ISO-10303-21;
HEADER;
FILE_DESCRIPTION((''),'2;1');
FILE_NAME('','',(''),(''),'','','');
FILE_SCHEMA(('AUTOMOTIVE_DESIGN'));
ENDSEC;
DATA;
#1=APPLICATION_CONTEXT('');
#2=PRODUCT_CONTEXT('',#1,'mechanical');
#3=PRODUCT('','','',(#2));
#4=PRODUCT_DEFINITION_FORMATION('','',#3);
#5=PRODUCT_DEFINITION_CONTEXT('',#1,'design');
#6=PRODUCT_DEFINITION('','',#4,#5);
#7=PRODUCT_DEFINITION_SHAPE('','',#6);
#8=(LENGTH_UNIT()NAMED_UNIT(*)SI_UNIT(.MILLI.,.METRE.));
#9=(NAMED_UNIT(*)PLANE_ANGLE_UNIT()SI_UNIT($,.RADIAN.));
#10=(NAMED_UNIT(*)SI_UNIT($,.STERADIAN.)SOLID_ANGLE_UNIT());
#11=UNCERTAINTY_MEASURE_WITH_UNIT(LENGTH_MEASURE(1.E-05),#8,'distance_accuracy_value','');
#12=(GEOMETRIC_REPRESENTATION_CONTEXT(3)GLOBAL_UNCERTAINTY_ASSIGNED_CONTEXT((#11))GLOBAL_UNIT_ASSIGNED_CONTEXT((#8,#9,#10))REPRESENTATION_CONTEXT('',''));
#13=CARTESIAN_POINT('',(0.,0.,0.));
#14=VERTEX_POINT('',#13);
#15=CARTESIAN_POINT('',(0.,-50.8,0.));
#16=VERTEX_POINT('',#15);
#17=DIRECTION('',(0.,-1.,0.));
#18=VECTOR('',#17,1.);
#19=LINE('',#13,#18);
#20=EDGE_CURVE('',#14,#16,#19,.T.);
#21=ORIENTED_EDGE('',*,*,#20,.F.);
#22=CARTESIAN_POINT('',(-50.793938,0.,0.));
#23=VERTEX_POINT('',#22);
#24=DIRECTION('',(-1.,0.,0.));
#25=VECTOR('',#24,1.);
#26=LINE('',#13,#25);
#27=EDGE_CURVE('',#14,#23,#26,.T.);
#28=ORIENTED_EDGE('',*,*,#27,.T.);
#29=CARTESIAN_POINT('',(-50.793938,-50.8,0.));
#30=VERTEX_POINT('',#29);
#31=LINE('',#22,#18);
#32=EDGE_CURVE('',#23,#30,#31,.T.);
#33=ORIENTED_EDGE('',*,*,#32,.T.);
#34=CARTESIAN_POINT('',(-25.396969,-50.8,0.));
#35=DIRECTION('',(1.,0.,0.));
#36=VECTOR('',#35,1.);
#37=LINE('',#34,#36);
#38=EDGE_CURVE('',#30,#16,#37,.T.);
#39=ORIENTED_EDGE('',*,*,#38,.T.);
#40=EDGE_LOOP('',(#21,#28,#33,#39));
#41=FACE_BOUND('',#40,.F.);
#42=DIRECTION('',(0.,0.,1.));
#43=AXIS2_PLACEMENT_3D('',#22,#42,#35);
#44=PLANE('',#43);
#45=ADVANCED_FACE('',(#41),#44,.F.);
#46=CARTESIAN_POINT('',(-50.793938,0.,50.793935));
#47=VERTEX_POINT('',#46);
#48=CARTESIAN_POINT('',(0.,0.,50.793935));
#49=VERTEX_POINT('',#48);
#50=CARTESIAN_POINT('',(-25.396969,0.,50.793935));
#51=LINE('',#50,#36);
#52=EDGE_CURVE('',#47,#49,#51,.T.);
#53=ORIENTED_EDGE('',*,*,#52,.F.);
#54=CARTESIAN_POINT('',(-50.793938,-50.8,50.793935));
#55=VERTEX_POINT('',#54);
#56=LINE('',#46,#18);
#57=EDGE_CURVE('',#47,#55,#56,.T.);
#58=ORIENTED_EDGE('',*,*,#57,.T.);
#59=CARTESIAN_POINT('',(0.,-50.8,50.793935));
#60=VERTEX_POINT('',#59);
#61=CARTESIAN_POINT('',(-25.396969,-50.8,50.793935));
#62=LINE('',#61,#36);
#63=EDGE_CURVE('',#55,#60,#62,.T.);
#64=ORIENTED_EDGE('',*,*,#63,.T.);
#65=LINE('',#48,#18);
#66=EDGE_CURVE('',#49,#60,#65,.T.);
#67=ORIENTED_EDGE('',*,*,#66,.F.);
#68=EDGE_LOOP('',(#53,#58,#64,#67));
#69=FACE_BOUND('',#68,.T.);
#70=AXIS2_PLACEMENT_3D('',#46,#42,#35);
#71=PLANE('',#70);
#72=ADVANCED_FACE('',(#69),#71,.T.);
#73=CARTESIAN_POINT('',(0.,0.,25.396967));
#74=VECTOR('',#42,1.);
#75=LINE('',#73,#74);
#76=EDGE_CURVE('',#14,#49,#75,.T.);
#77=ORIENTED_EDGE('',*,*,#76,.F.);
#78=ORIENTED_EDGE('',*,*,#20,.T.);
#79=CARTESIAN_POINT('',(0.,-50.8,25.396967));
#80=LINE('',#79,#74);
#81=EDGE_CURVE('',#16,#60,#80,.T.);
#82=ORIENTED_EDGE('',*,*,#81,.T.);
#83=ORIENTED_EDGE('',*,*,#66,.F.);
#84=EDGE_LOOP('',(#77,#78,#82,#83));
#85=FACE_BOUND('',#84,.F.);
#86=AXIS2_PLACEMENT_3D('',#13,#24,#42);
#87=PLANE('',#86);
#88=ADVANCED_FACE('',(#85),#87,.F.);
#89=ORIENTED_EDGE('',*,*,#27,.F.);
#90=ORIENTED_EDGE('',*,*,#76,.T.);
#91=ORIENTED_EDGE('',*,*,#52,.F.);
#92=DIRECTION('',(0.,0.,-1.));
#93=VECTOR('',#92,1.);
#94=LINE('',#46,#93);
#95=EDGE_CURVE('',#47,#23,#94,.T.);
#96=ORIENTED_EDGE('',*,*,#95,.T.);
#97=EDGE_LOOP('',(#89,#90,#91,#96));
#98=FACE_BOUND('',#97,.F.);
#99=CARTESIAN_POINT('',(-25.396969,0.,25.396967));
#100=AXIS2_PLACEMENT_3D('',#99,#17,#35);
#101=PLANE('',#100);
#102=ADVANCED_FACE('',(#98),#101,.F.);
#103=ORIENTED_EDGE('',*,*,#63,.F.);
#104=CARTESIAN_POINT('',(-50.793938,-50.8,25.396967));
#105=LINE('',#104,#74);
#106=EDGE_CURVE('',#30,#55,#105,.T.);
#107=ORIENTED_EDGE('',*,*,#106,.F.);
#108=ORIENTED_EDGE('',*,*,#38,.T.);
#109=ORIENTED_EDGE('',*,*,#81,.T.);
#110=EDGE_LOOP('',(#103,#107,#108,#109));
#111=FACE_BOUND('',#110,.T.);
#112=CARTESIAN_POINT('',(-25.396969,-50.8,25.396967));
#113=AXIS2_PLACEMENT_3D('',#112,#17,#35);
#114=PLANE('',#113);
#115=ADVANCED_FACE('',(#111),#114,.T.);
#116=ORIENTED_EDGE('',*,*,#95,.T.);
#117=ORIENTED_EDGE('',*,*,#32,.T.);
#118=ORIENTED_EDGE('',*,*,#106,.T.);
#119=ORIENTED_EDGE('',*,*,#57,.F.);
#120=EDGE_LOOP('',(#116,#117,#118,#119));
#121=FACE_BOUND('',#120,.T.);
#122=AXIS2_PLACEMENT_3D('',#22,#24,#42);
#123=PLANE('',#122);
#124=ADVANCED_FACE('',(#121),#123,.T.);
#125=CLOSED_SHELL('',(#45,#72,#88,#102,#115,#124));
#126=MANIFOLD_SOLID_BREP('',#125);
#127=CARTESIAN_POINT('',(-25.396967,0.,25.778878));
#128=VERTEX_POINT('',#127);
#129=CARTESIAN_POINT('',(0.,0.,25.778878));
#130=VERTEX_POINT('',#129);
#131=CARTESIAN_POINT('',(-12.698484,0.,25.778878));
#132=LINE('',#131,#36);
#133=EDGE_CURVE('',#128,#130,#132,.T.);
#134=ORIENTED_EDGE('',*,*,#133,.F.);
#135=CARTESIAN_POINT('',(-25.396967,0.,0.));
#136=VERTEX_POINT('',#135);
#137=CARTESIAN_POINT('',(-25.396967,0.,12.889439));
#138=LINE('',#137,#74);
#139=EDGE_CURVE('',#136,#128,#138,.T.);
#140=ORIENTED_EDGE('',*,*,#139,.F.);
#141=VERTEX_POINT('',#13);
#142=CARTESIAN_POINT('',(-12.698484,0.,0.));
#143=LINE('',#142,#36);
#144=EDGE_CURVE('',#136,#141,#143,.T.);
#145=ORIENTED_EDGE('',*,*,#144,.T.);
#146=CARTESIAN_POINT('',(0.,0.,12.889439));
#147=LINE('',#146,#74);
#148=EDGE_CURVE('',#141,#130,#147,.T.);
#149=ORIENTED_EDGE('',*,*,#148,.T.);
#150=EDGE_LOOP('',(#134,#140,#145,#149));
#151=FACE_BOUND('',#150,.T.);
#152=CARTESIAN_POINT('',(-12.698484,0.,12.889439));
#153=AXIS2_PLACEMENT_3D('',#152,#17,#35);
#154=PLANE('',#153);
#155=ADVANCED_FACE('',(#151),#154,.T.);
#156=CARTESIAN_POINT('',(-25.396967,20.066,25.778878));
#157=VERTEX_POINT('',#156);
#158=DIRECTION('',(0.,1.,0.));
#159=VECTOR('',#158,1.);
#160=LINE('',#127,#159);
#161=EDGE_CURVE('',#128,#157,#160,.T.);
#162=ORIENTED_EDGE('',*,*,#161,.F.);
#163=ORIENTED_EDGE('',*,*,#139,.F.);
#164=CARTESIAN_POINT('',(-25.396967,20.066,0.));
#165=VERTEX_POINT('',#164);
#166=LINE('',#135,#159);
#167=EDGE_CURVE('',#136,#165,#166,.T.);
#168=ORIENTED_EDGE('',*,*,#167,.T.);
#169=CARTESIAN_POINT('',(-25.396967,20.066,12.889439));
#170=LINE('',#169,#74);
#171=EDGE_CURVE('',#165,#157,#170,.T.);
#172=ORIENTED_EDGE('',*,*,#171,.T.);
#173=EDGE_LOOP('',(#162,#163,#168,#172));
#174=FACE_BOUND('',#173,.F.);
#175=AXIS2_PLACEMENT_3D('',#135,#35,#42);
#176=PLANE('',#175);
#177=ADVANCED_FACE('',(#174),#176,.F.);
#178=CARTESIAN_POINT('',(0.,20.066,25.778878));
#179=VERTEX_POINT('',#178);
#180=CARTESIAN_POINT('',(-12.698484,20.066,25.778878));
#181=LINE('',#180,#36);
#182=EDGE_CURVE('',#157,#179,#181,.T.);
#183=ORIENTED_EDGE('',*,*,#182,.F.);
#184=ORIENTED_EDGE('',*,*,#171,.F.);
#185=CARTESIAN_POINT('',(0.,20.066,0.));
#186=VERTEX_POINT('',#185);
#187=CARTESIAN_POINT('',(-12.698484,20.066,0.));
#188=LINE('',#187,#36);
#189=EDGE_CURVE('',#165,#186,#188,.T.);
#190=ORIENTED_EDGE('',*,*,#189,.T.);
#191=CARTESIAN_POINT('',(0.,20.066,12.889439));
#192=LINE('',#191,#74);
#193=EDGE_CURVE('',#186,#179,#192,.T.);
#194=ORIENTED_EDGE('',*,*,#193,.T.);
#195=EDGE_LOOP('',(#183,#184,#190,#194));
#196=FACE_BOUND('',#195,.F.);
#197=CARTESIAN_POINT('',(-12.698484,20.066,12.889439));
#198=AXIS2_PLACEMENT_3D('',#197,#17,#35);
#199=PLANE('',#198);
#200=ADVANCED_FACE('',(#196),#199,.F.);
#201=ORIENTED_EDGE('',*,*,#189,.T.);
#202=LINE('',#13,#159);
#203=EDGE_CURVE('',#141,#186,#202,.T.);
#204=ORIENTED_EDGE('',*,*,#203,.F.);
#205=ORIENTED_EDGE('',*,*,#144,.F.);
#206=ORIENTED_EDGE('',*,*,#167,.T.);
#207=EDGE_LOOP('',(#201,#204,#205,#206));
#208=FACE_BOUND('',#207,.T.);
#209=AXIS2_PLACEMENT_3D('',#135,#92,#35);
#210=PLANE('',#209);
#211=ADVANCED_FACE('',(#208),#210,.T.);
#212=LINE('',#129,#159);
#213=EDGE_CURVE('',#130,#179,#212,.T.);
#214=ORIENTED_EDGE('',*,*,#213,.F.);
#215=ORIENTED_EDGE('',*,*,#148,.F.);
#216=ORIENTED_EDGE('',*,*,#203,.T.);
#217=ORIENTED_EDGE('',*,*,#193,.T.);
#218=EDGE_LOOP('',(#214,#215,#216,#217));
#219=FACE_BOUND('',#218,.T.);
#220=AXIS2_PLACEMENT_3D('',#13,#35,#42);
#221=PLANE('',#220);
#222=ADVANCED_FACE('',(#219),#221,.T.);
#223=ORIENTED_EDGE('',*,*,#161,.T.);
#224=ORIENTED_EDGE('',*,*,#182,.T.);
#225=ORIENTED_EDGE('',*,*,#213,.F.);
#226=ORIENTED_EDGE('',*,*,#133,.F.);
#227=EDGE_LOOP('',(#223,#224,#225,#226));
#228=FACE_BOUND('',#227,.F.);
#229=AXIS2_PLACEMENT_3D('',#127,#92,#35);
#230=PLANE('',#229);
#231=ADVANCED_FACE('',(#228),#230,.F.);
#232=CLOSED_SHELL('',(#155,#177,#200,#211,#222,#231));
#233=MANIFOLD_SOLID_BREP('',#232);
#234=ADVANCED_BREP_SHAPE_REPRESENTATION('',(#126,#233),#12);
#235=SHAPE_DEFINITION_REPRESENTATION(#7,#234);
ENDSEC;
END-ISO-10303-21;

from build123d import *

# Parameters (mm, degrees)
F0_W     = 50.7939383388
F0_H     = 50.7939346135
F1_DEPTH = 50.8
F2_W     = 25.3969691694
F2_H     = 25.3969673067
F3_DEPTH = 25.4
F6_W     = 25.3969673067
F6_H     = 25.7788784802
F7_DEPTH = 20.066


# Not quite as in the source:
# - the program builds the solid bodies; features that only make, move or delete a surface that nothing else refers to are left out


with BuildPart() as f1:
    # F0 (on Front) → F1 (new body)
    with BuildSketch(Plane.XZ):
        with Locations((-25.3969691694, 25.3969673067)):
            Rectangle(F0_W, F0_H)
    extrude(amount=F1_DEPTH)

    # F2 (on Front) → F3 (join)
    with BuildSketch(Plane.XZ):
        with Locations((-38.0954537541, 12.6984836534)):
            Rectangle(F2_W, F2_H)
    extrude(amount=F3_DEPTH)


with BuildPart() as f7:
    # F6 (on Front) → F7 (new body)
    with BuildSketch(Plane.XZ):
        with Locations((-12.6984836534, 12.8894392401)):
            Rectangle(F6_W, F6_H)
    extrude(amount=-F7_DEPTH)


solid = Compound([f1.part, f7.part])
